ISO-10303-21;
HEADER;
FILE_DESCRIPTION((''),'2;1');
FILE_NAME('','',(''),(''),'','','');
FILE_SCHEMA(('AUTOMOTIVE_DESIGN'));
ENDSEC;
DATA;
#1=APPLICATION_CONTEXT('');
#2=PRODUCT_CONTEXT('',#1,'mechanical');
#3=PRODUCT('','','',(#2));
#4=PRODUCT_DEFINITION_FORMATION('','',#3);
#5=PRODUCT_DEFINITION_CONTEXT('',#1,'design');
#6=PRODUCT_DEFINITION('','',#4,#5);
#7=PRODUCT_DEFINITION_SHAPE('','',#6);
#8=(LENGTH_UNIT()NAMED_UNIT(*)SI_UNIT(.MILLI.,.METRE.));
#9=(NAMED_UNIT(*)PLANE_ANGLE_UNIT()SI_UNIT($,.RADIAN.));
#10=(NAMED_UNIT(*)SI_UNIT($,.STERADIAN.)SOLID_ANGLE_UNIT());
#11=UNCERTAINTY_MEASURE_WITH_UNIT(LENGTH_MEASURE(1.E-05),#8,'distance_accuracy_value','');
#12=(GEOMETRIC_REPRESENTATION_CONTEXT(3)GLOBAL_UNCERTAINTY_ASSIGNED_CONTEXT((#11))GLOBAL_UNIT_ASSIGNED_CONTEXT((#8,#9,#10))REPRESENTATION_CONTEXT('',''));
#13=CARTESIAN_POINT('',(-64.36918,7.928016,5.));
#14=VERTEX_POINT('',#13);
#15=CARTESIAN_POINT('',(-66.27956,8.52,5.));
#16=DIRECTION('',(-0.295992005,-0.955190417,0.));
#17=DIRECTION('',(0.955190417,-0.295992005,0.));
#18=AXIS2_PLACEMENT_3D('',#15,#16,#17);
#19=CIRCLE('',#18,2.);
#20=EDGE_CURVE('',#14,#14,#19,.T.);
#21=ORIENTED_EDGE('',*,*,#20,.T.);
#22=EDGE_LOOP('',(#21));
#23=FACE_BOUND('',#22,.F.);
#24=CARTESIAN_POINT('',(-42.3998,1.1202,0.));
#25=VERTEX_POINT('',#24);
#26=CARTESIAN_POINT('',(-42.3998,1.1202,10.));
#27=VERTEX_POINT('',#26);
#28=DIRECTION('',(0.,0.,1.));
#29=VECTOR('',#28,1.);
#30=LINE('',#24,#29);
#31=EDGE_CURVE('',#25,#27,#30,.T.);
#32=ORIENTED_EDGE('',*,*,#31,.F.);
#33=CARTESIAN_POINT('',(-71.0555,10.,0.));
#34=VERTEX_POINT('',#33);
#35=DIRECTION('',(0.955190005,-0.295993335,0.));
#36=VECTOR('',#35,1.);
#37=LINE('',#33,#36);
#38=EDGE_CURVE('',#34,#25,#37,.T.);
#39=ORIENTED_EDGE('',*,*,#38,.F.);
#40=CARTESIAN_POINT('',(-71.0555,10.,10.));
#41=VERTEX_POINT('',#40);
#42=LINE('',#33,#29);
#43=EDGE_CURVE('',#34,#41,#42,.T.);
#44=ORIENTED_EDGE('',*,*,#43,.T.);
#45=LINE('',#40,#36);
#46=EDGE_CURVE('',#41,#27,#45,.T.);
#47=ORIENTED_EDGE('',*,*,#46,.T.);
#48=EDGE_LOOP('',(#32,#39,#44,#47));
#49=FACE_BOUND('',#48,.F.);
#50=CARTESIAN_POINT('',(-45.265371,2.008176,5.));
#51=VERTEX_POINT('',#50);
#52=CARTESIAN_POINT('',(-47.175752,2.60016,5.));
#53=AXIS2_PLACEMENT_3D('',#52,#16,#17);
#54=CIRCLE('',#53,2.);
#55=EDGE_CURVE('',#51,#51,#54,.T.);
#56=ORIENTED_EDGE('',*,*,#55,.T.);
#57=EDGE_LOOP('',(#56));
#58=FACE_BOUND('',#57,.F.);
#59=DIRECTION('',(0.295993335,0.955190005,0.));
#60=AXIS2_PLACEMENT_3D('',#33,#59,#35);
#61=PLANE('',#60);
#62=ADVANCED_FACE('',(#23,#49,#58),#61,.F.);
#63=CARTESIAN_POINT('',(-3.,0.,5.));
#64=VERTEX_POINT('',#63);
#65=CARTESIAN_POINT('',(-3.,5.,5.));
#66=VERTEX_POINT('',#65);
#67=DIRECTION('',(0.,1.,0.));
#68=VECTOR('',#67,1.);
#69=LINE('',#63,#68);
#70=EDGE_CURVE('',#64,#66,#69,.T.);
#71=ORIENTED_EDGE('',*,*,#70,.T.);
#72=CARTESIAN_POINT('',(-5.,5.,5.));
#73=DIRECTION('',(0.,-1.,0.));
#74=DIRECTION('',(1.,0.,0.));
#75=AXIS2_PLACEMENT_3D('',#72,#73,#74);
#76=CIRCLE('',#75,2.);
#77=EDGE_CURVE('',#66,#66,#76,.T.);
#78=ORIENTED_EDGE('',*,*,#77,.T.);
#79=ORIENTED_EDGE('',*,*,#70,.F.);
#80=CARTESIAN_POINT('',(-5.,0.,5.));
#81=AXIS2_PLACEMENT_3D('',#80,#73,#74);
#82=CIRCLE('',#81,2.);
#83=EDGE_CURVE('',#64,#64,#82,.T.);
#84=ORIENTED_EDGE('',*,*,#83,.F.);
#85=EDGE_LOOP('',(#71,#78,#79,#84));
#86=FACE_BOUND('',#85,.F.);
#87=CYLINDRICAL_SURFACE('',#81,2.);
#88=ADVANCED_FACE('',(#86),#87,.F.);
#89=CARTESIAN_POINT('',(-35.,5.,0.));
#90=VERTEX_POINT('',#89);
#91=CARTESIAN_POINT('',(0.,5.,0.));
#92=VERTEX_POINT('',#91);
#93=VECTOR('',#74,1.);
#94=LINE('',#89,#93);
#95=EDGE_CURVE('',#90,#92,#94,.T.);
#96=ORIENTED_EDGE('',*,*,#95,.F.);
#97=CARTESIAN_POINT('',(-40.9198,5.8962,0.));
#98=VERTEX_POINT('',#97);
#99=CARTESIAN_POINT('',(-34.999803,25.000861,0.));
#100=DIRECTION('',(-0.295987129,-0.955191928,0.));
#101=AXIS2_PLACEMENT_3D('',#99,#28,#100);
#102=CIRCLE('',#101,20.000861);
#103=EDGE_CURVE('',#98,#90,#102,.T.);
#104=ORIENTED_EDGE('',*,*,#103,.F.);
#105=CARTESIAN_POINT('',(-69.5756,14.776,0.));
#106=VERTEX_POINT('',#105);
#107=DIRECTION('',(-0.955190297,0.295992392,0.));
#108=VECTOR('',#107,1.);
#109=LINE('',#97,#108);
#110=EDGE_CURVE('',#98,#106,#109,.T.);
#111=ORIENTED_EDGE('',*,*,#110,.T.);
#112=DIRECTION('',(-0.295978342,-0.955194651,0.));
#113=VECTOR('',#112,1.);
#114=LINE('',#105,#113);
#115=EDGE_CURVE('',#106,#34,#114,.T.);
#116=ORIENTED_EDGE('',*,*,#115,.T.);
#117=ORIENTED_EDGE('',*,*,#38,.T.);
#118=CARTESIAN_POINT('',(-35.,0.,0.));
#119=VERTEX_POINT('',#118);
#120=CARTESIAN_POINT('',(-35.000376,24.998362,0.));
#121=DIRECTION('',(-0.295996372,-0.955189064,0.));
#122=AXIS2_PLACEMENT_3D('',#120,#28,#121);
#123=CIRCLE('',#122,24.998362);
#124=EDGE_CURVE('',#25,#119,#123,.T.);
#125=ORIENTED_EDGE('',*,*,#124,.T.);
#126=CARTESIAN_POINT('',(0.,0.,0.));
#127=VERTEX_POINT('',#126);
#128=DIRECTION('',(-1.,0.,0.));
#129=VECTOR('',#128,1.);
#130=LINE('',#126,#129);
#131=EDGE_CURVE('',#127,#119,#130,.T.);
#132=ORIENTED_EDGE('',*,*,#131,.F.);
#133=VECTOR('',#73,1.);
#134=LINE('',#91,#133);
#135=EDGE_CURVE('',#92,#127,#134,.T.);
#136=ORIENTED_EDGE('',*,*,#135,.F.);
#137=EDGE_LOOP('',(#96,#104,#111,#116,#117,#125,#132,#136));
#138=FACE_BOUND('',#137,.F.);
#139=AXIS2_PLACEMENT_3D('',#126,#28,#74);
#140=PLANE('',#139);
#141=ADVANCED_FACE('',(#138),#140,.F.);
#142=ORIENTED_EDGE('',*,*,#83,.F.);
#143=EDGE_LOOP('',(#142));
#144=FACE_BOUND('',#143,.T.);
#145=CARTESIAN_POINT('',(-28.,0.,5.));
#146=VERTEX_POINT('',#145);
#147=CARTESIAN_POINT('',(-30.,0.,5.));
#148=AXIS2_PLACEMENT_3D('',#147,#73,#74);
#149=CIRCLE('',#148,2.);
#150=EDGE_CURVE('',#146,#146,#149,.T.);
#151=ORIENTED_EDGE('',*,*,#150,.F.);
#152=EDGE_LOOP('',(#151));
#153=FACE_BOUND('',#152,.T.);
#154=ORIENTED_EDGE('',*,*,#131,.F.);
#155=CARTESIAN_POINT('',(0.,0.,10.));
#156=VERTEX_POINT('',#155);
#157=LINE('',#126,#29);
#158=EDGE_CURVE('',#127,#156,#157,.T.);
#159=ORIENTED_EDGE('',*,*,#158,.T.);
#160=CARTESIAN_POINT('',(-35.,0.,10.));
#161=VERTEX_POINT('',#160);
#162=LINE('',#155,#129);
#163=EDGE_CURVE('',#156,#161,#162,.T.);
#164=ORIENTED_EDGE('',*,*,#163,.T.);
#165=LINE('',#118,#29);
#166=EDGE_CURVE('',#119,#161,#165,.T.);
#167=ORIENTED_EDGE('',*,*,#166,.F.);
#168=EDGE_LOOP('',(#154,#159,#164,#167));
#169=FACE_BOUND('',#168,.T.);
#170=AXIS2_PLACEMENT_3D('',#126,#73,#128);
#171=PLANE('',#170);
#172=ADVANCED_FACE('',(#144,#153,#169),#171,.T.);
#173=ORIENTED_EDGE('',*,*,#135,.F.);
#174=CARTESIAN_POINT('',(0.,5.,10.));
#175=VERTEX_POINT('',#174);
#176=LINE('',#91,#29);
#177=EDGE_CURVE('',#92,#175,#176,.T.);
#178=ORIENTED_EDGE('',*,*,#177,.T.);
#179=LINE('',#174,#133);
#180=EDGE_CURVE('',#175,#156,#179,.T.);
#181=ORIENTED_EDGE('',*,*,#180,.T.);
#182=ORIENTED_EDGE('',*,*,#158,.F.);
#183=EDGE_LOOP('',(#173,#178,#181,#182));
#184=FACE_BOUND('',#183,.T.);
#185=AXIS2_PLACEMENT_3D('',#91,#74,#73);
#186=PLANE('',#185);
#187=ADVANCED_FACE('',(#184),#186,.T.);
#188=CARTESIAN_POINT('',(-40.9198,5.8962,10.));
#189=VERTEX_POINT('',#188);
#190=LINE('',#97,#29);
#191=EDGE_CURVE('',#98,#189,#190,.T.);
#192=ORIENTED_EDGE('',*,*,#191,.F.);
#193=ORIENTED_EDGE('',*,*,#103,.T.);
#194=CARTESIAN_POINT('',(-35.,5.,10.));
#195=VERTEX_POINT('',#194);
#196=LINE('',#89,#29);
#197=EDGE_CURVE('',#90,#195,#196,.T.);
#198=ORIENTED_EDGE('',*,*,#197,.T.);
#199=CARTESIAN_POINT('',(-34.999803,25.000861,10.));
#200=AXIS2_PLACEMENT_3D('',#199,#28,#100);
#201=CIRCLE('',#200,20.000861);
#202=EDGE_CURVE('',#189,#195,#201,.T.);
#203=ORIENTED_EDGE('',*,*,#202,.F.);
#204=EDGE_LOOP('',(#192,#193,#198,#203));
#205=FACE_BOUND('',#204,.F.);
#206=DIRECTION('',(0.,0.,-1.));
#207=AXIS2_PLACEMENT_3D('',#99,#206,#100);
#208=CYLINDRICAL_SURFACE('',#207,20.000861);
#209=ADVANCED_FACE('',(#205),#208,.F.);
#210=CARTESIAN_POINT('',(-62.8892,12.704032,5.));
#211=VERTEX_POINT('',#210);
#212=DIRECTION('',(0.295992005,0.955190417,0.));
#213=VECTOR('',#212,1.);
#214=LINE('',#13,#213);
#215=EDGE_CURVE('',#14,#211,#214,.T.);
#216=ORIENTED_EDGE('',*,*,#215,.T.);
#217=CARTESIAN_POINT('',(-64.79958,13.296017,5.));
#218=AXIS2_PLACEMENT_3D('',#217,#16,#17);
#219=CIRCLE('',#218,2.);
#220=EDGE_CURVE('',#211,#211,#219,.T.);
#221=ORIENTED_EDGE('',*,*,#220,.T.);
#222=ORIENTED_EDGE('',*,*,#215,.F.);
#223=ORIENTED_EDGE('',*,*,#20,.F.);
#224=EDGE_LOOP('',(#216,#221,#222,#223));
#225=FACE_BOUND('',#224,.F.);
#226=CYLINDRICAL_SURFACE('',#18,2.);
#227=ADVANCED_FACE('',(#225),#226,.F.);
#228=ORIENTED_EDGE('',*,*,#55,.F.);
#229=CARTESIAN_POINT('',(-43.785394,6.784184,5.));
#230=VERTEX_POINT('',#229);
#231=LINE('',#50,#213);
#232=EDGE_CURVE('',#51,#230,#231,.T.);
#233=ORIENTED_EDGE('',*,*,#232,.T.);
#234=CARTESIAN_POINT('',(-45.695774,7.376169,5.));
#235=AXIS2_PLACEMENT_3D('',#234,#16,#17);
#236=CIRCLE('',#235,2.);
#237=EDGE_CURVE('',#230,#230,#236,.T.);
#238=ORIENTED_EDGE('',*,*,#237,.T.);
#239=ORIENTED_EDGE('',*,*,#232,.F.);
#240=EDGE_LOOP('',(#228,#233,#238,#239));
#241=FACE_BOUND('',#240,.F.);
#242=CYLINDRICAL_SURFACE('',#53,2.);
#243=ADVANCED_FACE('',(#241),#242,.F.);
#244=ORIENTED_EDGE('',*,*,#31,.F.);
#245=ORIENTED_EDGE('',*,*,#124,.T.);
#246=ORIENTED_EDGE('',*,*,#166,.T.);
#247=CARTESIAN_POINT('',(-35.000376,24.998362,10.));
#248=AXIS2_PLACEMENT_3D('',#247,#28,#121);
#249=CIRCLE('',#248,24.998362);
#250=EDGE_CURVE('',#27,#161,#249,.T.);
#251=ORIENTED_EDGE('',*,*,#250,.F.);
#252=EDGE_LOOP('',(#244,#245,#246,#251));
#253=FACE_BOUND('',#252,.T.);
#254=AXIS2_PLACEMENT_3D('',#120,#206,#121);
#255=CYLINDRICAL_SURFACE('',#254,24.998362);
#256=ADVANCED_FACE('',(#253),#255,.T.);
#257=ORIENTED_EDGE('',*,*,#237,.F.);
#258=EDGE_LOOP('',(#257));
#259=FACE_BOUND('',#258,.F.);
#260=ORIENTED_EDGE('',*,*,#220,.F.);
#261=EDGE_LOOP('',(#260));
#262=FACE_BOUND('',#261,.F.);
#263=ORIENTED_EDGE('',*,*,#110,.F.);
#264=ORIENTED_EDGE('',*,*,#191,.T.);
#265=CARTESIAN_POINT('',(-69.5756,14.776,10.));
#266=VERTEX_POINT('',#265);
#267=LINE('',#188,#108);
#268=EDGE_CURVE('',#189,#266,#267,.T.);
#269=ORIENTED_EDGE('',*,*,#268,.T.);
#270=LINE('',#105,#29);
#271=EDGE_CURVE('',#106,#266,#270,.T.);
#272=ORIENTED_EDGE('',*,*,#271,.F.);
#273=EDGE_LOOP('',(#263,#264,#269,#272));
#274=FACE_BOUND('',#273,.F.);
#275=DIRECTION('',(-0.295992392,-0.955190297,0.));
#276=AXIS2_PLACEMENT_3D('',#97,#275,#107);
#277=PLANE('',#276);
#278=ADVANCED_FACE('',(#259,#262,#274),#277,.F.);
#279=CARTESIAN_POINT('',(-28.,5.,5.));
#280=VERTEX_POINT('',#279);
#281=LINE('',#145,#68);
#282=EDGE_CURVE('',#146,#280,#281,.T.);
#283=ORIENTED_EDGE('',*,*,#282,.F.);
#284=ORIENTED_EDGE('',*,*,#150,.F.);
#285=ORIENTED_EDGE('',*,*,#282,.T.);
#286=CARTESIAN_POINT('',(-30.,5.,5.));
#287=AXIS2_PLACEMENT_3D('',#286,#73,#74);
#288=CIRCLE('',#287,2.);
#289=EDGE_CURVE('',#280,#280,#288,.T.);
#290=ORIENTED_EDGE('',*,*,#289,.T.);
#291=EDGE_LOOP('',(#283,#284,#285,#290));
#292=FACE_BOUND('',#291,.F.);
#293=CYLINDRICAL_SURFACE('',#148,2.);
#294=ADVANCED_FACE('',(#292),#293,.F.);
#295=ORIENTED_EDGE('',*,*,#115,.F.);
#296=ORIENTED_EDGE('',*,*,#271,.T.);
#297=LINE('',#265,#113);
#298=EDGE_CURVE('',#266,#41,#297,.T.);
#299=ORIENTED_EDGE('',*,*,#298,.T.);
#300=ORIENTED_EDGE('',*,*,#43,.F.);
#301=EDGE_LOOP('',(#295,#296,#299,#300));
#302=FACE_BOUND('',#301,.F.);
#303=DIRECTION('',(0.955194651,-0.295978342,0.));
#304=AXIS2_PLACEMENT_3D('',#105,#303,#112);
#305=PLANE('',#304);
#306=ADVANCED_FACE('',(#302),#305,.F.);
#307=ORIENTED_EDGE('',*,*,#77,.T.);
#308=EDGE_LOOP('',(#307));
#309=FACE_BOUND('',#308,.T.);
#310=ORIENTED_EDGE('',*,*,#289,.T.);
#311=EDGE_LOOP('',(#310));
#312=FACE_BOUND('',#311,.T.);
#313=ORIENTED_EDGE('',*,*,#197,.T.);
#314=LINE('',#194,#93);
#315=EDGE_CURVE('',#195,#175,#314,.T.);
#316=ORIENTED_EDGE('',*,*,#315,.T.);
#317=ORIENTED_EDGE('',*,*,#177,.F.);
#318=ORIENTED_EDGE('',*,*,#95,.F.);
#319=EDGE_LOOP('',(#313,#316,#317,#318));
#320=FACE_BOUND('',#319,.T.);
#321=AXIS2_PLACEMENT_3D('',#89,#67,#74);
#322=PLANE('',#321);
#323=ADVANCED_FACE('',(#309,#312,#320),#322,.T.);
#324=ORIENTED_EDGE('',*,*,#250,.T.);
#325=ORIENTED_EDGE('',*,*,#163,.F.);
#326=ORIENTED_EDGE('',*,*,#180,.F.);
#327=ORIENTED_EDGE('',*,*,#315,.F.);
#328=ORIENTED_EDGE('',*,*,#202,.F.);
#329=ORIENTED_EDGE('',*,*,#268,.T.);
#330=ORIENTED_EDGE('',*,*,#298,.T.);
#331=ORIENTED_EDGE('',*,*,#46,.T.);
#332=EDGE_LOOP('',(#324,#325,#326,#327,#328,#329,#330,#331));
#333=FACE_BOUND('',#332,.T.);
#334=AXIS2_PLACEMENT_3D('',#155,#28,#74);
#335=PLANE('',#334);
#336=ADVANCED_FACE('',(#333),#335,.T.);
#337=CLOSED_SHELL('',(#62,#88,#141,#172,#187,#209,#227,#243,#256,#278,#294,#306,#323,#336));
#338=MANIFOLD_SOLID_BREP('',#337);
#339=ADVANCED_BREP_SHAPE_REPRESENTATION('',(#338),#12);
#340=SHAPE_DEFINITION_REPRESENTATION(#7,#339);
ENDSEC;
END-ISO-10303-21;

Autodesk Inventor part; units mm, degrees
ref_plane "YZ Plane" through (0, 0, 0) normal (1, 0, 0) x (0, 1, 0)
ref_plane "XZ Plane" through (0, 0, 0) normal (0, 1, 0) x (-1, 0, 0)
ref_plane "XY Plane" through (0, 0, 0) normal (0, 0, 1) x (1, 0, 0)
sketch "スケッチ1" plane through (0, 0, 0) normal (0, 0, 1) x (1, 0, 0)
  line L0 (0, 0) -> (-35, 0)
  line L1 (-35, 0) -> (-35, 5)
  line L2 (-35, 5) -> (0, 5)
  line L3 (0, 5) -> (0, 0)
  arc A0 (-42.3998, 1.1202) -> (-35, 0) centre (-35, 25) ccw
  arc A1 (-40.9198, 5.8962) -> (-35, 5) centre (-35, 25) ccw
  line L4 (-40.9198, 5.8962) -> (-42.3998, 1.1202)
  line L5 (-40.9198, 5.8962) -> (-69.5756, 14.776)
  line L6 (-69.5756, 14.776) -> (-71.0555, 10)
  line L7 (-71.0555, 10) -> (-42.3998, 1.1202)
  dimension "d3" = 5
  dimension "d4" = 5
  dimension "d6" = 20
  dimension "d7" = 35
  dimension "d8" = 10
  dimension "d23" = 30
extrude "押し出し1" add sketch "スケッチ1" along normal blind 10
sketch "スケッチ2" plane through (-42.3998, 1.1202, 0) normal (-0.295992, -0.9551904, 0) x (0.9551904, -0.295992, 0)
  line L0 (-30, 0) -> (0, 0) projected
  line L1 (0, 0) -> (0, 10) projected
  line L2 (-30, 10) -> (0, 10) projected
  line L3 (-30, 0) -> (-30, 10) projected
  circle A0 centre (-25, 5) radius 2
  circle A1 centre (-5, 5) radius 2
  point P0 (40.8315, 0)
  point P1 (0, 5)
  point P2 (-30, 5)
  dimension "d11" = 4
  dimension "d12" = 4
  dimension "d13" = 5
  dimension "d14" = 5
extrude "押し出し2" cut sketch "スケッチ2" against normal through all contours A0 | A1
sketch "スケッチ3" plane through (-35, 0, 0) normal (0, -1, 0) x (1, 0, 0)
  line L0 (0, 0) -> (35, 0) projected
  line L1 (35, 0) -> (35, 10) projected
  line L2 (0, 10) -> (35, 10) projected
  line L3 (0, 0) -> (0, 10) projected
  circle A0 centre (5, 5) radius 2
  circle A1 centre (30, 5) radius 2
  point P0 (35, 5)
  point P1 (0, 5)
  dimension "d17" = 4
  dimension "d18" = 4
  dimension "d19" = 5
  dimension "d20" = 5
extrude "押し出し3" cut sketch "スケッチ3" against normal through all contours A0 | A1
properties part number "カウンター根本1" material "アルミニウム 6061"
